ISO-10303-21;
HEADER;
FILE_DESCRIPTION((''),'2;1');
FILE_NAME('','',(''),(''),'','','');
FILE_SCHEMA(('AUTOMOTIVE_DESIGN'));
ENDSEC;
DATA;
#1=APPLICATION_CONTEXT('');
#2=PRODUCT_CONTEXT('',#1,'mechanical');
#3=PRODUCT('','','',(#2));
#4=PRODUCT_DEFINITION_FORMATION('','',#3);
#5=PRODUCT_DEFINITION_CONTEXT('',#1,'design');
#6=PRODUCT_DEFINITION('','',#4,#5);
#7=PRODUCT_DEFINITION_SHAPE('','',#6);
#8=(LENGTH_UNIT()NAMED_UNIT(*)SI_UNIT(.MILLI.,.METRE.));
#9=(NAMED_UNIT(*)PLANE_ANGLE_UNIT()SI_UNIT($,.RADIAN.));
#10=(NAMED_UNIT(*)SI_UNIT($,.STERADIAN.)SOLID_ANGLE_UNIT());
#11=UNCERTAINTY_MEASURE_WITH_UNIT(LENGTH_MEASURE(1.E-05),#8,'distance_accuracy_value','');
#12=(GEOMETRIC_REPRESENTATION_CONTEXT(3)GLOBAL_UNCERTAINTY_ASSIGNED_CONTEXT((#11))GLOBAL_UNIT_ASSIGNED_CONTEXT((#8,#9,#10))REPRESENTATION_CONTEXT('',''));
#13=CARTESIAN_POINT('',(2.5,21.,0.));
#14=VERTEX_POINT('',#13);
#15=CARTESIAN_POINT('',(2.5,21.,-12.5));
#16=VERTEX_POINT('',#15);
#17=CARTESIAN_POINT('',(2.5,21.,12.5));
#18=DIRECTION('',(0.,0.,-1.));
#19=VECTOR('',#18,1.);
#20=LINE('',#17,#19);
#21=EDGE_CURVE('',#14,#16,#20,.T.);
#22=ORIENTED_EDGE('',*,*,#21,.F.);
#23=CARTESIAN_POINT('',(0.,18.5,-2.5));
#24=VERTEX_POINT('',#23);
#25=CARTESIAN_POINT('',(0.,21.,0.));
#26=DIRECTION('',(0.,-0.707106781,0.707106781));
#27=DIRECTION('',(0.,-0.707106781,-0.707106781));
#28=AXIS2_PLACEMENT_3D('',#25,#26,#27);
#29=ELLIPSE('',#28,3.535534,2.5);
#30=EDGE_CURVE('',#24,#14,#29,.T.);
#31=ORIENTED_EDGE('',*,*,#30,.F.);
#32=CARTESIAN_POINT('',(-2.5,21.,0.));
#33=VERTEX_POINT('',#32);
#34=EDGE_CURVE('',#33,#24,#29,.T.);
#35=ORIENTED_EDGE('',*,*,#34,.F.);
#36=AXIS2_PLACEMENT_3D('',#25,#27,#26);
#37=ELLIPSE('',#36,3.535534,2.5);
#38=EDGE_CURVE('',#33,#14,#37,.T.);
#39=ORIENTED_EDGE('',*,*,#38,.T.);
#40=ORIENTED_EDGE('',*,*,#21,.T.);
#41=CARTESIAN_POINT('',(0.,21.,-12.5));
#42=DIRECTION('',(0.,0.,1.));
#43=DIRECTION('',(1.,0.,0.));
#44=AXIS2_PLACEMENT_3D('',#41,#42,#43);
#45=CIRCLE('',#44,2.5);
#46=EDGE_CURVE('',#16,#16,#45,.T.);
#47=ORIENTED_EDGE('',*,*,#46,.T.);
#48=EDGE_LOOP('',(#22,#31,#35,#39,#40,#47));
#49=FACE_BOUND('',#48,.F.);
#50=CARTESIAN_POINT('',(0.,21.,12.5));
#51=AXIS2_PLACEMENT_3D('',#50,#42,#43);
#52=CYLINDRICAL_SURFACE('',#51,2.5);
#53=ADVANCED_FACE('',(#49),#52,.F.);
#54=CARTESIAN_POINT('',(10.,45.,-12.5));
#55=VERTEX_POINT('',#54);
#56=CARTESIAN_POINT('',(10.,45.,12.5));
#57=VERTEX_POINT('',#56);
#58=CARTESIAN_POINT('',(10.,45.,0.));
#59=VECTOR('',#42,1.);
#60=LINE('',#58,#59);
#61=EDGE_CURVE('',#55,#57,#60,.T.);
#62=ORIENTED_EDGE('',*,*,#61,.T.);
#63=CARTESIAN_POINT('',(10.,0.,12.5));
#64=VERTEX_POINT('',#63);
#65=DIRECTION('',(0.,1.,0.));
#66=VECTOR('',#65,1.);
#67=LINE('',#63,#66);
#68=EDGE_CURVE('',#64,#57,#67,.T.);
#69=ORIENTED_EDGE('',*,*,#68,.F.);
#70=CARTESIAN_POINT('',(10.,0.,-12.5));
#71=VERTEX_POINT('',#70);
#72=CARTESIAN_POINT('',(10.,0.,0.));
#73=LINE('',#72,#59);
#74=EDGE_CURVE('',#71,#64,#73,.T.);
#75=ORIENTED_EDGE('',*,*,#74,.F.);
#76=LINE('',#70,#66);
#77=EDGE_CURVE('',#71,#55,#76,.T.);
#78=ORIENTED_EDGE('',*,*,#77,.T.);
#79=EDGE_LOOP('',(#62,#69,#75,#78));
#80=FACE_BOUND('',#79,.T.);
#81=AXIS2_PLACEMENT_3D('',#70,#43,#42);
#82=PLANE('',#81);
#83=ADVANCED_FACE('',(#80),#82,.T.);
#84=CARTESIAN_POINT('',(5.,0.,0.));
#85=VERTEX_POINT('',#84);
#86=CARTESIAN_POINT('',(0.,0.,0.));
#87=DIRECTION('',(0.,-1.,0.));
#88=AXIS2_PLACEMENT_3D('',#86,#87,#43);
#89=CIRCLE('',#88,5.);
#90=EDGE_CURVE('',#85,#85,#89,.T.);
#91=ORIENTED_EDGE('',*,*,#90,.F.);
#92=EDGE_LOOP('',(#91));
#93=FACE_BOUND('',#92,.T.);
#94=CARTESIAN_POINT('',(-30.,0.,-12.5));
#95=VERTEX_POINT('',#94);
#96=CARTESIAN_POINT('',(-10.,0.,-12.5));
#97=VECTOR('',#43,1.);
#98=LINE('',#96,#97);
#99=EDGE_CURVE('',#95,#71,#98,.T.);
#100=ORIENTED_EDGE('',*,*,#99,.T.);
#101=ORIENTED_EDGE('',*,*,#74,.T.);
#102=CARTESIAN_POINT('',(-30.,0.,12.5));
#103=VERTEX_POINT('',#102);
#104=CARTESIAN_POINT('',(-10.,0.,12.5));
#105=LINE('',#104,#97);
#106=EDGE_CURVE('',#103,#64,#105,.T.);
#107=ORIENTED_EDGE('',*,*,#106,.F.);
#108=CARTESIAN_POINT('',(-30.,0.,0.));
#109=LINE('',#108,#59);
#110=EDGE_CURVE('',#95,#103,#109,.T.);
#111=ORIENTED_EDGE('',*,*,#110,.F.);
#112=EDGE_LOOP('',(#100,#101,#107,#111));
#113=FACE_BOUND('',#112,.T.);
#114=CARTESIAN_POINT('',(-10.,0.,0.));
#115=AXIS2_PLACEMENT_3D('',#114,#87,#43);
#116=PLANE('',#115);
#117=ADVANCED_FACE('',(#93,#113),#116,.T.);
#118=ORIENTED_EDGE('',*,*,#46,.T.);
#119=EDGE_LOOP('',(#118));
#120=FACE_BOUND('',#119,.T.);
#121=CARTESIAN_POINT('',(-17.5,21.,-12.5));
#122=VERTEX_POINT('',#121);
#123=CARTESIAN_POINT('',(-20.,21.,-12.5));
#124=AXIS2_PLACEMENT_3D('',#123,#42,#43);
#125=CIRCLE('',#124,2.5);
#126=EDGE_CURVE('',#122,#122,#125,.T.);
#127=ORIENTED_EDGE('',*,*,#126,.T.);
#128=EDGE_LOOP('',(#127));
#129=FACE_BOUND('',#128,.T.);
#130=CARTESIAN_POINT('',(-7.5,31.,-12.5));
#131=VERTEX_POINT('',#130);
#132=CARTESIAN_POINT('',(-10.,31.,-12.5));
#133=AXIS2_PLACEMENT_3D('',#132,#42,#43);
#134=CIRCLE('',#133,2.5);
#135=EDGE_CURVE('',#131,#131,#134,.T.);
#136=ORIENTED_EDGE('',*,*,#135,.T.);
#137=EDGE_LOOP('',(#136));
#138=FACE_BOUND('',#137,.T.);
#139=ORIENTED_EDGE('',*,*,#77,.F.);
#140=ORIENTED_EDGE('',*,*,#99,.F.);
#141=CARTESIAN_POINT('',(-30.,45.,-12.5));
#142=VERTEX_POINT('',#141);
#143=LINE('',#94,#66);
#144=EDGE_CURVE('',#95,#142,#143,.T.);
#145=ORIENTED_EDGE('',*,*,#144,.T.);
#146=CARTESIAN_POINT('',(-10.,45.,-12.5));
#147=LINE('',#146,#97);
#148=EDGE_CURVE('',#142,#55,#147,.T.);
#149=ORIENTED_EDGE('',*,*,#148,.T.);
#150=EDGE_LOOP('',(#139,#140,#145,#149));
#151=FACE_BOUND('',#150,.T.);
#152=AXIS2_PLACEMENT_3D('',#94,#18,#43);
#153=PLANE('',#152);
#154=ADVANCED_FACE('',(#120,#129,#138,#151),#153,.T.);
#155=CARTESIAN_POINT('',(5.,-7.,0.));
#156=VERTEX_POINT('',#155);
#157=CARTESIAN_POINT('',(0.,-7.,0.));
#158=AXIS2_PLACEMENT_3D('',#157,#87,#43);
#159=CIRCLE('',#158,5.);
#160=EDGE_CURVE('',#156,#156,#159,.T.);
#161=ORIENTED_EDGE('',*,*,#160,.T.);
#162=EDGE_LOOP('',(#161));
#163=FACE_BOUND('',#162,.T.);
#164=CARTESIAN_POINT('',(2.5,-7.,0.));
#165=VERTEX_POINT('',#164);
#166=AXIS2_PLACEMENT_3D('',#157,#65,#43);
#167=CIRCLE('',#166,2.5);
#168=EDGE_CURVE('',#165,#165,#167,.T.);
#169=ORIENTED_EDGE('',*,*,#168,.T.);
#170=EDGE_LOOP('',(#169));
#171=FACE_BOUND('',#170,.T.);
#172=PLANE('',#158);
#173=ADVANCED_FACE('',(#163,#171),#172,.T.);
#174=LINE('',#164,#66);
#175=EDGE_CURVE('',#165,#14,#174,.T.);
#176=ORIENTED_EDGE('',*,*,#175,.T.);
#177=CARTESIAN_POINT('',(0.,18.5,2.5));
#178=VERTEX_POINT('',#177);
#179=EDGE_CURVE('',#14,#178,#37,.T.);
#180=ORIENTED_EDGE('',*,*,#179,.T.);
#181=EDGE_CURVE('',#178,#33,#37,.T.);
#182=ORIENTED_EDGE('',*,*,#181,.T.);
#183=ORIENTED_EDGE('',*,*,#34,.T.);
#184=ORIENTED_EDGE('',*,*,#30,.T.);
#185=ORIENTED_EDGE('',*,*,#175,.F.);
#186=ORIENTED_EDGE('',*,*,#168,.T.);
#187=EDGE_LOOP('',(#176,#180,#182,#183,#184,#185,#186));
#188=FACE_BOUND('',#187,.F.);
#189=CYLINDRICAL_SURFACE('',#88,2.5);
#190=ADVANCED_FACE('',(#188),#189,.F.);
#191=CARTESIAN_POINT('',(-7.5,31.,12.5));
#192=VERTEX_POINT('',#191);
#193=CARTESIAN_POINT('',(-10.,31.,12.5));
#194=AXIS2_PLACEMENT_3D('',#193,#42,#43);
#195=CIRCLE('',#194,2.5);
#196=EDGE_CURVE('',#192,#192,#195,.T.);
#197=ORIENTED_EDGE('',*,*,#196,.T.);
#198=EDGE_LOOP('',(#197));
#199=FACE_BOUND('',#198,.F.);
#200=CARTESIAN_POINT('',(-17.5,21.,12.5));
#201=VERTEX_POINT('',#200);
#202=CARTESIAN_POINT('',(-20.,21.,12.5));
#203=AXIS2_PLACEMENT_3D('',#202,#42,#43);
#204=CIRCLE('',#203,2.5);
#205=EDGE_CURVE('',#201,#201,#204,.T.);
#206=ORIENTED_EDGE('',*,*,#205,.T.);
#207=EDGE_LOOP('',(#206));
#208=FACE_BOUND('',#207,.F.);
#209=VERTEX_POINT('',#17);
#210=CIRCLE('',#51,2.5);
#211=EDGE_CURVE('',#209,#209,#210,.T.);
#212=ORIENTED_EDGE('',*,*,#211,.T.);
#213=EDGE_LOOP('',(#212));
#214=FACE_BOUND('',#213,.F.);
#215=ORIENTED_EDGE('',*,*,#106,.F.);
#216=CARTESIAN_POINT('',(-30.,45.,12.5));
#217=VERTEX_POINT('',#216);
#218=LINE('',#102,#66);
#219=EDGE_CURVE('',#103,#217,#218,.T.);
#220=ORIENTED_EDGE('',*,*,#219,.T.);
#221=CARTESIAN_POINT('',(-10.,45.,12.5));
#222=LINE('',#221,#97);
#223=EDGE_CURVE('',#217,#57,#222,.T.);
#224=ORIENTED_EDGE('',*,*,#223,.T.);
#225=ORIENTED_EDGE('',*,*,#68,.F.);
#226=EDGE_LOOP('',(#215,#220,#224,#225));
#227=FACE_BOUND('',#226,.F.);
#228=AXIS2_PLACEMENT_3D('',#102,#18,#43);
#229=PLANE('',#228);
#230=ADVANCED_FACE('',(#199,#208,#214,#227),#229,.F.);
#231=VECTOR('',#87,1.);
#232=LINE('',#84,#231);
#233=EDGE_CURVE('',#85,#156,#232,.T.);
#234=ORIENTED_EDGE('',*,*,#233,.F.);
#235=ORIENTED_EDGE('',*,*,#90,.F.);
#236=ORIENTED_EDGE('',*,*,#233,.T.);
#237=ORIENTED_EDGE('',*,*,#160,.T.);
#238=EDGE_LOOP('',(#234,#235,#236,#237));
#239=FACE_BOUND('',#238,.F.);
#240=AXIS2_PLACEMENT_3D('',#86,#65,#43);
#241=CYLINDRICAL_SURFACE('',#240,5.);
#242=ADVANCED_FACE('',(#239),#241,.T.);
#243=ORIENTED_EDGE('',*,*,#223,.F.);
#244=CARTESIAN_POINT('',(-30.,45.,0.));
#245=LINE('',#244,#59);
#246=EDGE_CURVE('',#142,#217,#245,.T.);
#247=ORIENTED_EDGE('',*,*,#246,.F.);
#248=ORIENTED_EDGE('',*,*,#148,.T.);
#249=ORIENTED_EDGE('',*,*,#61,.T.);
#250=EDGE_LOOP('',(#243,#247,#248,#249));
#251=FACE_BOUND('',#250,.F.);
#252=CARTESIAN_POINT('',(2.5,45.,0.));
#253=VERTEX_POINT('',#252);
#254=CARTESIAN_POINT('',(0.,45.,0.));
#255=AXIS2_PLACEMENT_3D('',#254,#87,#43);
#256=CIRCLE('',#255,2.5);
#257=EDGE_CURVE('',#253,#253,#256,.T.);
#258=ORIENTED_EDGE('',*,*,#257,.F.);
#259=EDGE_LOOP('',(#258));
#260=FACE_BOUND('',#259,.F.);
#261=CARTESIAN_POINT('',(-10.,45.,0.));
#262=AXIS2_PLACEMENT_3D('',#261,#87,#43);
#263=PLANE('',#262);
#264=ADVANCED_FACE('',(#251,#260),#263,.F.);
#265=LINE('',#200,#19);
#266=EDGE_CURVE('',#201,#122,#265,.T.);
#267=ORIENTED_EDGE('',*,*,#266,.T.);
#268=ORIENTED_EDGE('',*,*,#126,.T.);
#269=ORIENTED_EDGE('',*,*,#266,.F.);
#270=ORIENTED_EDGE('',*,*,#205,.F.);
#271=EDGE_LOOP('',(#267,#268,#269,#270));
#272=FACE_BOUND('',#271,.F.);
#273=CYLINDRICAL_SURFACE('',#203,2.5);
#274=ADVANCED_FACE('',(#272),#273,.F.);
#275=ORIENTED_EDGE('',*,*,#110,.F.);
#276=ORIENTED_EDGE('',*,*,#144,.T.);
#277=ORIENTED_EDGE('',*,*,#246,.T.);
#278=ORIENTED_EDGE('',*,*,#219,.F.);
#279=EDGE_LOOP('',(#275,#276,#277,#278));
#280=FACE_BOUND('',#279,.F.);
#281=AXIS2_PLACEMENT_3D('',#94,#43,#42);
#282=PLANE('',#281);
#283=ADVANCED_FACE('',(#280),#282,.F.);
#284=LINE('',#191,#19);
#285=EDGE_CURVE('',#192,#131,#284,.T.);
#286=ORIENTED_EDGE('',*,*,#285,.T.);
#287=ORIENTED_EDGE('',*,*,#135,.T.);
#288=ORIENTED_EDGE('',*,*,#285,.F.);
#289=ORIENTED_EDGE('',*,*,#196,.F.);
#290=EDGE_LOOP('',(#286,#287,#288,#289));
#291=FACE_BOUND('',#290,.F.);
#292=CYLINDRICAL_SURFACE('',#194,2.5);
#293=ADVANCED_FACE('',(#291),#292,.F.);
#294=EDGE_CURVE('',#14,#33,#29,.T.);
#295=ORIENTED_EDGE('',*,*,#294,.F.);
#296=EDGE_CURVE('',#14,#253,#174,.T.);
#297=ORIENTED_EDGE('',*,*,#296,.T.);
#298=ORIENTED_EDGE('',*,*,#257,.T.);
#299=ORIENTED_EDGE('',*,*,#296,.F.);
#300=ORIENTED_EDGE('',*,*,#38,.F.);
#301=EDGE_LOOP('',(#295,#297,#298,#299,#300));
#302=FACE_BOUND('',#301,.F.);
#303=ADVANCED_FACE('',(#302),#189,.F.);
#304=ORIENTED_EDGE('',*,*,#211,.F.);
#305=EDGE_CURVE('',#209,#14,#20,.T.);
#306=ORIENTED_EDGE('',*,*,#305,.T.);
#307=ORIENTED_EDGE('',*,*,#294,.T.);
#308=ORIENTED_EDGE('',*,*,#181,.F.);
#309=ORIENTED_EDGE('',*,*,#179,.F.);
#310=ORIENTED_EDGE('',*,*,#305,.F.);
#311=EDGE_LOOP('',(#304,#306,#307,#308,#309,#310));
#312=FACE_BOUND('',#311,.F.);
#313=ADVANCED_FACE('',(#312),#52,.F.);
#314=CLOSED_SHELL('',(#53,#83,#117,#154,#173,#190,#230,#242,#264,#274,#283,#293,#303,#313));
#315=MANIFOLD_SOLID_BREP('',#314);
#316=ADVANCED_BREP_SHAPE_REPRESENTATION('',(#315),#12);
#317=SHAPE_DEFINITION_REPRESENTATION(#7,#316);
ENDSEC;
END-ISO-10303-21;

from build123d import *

# Parameters (mm, degrees)
F0_W          = 40
F0_H          = 25
F1_DEPTH      = 45
F2_R          = 5
F3_DEPTH      = 7
F4_R          = 2.5
F5_DEPTH      = 45.001
F5_DEPTH_BACK = 7.001
F6_R          = 2.5
F7_DEPTH      = 25.001


with BuildPart() as f1:
    # F0 (on Front) → F1 (new body)
    with BuildSketch(Plane.XZ):
        with Locations((-10, 0)):
            Rectangle(F0_W, F0_H)
    extrude(amount=-F1_DEPTH)

    # F2 (on face) → F3 (join)
    with BuildSketch(Plane.XZ):
        Circle(F2_R)
    extrude(amount=F3_DEPTH)

    # F4 (on Front) → F5 (cut, two sides)
    with BuildSketch(Plane.XZ) as f5_sk:
        Circle(F4_R)
    extrude(amount=-F5_DEPTH, mode=Mode.SUBTRACT)
    extrude(f5_sk.sketch, amount=F5_DEPTH_BACK, mode=Mode.SUBTRACT)

    # F6 (on face) → F7 (cut, through all)
    with BuildSketch(Plane.XY.offset(12.5)):
        with Locations((0, 21)):
            Circle(F6_R)
        with Locations((-10, 31)):
            Circle(F6_R)
        with Locations((-20, 21)):
            Circle(F6_R)
    extrude(amount=-F7_DEPTH, mode=Mode.SUBTRACT)


solid = f1.part
